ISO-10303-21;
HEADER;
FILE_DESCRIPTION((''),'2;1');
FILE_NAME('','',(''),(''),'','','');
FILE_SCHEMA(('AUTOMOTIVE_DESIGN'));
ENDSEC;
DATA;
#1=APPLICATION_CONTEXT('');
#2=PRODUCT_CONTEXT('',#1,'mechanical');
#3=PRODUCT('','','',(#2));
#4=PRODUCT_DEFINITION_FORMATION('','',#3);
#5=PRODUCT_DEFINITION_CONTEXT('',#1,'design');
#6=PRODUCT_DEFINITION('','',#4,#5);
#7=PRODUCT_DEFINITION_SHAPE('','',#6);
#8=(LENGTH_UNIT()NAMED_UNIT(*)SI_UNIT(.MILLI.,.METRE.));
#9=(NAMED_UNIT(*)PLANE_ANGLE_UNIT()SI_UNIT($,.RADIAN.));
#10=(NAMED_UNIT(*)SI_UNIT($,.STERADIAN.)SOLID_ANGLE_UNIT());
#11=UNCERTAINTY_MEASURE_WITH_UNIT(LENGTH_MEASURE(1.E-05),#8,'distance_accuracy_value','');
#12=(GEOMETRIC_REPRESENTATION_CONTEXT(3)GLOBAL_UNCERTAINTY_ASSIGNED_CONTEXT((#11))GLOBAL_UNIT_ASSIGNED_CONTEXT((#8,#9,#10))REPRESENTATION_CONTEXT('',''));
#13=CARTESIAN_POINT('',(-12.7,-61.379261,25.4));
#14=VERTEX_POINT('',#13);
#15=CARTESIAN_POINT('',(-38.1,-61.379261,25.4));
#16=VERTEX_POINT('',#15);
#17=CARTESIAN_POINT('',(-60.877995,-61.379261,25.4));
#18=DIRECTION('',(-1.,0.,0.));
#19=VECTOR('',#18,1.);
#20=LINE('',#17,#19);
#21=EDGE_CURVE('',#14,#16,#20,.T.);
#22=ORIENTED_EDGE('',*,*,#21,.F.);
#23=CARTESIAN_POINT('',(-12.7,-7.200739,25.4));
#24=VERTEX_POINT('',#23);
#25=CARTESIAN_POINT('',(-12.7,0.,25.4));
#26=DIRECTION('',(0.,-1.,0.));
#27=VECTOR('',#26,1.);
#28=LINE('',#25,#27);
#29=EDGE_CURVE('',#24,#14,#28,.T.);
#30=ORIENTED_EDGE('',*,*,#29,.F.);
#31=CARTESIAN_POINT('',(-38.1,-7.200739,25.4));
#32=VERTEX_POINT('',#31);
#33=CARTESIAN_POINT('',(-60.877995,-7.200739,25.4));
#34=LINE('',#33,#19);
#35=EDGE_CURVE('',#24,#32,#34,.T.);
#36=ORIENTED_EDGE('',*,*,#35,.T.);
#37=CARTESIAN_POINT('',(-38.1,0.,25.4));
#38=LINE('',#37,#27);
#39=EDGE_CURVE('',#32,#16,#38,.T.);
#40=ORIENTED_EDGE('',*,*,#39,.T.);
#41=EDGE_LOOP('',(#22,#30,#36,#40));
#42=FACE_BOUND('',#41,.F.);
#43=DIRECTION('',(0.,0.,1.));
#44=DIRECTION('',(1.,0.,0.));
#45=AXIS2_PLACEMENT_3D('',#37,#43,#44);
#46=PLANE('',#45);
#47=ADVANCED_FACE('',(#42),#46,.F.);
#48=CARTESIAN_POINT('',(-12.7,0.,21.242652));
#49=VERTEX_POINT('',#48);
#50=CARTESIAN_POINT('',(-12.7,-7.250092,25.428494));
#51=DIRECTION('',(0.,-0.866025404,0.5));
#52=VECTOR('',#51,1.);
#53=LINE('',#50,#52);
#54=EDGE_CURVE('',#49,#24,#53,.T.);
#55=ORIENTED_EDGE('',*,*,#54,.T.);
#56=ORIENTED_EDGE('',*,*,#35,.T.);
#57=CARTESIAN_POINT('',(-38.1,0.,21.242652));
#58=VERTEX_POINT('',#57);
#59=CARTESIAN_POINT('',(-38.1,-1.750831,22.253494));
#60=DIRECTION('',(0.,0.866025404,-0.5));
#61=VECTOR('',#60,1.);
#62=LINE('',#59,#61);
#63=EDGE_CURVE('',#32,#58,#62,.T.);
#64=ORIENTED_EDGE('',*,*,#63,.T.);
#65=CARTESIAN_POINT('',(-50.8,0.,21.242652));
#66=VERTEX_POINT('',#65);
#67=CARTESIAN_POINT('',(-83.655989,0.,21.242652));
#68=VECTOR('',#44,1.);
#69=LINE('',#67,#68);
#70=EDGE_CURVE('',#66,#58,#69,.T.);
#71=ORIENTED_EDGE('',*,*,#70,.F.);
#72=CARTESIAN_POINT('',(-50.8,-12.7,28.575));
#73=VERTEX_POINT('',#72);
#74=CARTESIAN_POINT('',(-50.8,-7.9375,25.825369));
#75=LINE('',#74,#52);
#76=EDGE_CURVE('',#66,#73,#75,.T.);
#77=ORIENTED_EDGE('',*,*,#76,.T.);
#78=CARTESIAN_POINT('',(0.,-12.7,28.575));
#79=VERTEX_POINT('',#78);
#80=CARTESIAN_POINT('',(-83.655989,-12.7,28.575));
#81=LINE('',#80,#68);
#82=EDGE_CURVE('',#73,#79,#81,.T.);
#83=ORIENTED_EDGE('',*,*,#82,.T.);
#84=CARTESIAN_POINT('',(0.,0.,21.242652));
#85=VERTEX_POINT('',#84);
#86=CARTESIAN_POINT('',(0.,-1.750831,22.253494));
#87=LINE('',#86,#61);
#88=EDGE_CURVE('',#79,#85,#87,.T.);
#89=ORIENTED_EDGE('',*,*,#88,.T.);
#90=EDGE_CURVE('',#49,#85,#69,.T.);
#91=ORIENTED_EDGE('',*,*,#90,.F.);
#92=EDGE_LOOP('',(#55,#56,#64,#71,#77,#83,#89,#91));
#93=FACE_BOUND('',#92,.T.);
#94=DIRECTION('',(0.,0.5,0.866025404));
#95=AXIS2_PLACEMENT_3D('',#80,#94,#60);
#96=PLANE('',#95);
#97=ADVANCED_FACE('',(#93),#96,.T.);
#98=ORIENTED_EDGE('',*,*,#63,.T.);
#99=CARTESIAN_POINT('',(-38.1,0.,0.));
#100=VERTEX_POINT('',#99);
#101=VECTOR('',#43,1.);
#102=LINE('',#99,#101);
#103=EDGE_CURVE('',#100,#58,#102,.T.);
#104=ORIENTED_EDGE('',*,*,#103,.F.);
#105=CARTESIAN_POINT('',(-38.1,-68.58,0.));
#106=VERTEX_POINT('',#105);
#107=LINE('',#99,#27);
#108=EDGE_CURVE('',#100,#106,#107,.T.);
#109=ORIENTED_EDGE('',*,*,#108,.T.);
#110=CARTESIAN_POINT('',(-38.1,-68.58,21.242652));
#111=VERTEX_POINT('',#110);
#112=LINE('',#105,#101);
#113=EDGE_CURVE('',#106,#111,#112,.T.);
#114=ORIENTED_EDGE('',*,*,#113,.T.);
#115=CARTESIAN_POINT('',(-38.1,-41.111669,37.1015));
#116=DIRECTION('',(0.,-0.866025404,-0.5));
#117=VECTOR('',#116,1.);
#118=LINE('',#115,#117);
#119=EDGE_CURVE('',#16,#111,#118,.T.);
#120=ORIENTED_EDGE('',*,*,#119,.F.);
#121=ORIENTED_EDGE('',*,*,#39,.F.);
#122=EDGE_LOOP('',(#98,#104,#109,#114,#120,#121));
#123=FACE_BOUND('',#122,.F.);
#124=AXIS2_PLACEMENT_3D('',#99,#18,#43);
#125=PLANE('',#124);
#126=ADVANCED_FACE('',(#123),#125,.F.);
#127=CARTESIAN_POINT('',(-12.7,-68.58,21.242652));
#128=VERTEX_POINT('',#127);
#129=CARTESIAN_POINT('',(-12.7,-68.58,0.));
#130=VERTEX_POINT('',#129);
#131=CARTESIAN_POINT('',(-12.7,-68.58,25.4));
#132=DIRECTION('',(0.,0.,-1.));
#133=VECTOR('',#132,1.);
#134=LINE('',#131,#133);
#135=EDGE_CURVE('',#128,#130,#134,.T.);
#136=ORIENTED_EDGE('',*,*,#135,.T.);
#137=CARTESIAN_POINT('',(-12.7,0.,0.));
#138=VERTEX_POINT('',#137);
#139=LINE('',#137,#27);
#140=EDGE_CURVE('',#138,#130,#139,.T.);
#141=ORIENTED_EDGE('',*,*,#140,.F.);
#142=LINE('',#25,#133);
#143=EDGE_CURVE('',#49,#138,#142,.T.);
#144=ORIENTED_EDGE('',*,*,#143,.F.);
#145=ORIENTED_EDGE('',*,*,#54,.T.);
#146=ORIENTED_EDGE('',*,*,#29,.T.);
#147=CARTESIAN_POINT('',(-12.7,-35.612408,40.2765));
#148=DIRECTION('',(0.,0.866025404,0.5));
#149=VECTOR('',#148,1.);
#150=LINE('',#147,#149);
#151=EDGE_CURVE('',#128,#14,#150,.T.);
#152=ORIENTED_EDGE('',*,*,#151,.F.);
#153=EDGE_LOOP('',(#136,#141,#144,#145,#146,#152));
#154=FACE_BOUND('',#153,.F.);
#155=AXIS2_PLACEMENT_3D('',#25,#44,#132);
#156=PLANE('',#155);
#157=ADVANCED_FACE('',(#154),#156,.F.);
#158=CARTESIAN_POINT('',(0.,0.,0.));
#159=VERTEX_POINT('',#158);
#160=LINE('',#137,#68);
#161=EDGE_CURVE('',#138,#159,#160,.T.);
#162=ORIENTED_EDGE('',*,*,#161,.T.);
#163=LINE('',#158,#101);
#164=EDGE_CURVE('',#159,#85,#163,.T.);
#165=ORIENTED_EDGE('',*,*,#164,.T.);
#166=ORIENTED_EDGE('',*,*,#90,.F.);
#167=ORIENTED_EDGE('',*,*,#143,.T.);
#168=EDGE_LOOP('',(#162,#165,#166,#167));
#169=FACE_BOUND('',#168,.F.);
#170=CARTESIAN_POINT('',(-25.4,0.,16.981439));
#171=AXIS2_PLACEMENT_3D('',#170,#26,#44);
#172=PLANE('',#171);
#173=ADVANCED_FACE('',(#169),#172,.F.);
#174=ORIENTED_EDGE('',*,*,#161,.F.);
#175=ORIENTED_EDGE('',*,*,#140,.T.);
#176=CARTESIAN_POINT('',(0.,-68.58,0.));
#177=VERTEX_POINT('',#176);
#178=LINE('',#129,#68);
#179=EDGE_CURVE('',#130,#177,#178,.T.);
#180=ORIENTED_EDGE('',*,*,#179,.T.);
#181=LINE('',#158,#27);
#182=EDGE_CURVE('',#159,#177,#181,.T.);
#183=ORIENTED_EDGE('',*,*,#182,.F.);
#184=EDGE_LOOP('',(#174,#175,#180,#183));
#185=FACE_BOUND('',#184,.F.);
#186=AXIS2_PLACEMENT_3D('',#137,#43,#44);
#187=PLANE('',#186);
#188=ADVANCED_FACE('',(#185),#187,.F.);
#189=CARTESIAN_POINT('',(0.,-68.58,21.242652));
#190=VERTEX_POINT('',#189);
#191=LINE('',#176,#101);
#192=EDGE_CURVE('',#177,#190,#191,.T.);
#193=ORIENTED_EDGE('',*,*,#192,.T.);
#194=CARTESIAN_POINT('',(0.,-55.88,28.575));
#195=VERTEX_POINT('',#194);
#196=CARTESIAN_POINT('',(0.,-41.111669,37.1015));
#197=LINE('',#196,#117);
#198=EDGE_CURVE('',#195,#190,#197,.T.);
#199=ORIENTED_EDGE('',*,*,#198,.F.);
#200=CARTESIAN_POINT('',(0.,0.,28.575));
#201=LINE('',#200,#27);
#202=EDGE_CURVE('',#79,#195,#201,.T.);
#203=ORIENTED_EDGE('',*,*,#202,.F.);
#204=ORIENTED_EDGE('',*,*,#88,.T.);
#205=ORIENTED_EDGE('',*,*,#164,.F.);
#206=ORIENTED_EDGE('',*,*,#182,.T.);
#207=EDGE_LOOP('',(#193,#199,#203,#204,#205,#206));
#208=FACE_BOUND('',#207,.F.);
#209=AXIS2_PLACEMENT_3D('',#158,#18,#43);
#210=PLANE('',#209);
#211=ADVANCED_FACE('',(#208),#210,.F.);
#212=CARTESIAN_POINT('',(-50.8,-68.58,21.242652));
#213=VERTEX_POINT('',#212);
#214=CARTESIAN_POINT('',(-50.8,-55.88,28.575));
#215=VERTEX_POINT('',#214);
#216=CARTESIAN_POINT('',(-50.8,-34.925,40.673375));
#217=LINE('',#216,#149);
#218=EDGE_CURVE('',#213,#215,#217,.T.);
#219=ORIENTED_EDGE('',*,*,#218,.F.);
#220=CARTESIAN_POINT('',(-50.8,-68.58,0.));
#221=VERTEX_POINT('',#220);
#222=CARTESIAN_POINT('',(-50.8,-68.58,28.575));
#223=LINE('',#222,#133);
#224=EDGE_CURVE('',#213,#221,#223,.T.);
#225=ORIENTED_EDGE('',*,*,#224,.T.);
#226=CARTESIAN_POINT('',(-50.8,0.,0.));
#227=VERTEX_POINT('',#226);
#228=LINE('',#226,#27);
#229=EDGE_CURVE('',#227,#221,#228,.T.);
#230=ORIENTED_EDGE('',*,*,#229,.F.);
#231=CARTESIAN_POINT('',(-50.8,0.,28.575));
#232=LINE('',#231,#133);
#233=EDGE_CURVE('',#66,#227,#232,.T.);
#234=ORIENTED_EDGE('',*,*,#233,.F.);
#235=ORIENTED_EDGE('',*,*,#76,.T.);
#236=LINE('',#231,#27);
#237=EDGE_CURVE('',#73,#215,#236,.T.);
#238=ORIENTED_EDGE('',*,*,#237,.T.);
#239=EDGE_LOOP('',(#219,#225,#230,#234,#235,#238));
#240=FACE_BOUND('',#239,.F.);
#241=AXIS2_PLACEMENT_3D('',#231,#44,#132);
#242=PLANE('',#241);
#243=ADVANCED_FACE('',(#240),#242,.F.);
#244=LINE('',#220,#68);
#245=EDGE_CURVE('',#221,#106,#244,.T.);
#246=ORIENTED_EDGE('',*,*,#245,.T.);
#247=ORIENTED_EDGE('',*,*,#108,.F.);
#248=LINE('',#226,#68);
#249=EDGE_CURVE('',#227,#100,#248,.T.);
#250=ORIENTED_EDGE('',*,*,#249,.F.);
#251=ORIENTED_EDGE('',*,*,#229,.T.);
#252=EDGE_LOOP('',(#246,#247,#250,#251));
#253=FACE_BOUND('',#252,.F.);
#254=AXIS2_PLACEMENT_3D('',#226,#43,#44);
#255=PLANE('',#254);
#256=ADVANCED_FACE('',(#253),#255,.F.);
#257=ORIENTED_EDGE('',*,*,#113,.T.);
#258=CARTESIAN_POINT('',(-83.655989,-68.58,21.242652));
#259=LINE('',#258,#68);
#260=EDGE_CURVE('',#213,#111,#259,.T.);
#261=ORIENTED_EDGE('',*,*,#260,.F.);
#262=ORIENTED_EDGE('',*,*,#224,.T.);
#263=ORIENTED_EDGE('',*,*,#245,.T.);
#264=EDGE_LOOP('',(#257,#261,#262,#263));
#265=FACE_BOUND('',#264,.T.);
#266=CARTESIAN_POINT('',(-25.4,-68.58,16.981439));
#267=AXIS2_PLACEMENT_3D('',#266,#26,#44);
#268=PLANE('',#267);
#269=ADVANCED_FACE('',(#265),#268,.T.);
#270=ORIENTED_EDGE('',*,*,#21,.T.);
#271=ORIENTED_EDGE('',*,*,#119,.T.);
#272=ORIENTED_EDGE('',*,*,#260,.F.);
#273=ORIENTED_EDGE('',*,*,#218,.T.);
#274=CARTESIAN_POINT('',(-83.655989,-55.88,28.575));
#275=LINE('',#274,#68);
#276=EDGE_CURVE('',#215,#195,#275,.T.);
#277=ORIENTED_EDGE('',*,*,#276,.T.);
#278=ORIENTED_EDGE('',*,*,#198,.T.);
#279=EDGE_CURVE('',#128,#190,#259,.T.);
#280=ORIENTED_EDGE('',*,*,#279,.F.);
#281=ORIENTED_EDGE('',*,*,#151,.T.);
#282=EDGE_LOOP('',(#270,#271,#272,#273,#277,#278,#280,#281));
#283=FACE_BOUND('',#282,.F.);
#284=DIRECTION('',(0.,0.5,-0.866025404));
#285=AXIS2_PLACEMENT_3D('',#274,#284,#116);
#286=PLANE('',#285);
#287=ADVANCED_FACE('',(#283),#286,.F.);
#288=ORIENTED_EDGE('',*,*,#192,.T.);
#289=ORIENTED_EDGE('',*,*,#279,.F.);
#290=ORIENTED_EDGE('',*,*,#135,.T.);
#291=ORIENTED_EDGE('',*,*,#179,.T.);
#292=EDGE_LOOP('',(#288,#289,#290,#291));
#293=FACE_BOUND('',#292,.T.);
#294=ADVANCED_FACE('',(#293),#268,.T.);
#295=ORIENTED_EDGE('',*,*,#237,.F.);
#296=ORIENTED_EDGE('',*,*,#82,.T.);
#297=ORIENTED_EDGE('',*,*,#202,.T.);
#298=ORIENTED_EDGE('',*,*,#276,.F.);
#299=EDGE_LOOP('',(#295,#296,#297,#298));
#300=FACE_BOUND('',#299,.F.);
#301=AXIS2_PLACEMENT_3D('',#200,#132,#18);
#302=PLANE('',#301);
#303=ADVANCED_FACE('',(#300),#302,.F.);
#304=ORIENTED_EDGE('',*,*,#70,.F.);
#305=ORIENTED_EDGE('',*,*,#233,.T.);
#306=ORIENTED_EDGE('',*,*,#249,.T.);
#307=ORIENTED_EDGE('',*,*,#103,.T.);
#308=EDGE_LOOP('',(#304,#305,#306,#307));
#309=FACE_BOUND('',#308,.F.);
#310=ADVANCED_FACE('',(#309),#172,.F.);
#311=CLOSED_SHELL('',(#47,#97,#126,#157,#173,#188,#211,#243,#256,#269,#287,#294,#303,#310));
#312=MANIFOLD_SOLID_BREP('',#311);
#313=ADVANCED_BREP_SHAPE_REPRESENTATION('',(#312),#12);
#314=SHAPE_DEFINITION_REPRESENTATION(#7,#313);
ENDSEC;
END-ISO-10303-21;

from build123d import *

# Parameters (mm, degrees)
F1_DEPTH    = 68.58
F2_T1_DEPTH = 116.511978168


# Not quite as in the source:
# - a fillet or chamfer that OpenCascade refuses, or shapes differently, is made with other operations: its cross-section is extruded or revolved along the edge and cut away or added


with BuildPart() as f1:
    # F0 (on Front) → F1 (new body)
    with BuildSketch(Plane.XZ):
        Polygon((-12.7, 0), (0, 0), (0, 28.575), (-50.8, 28.575), (-50.8, 0), (-38.1, 0), (-38.1, 25.4), (-12.7, 25.4), align=None)
    extrude(amount=F1_DEPTH)

    # F2: chamfer of 12.7 x 7.3323484187 on 2 edges, made by hand

    # F2_s2 → F2_t1 (cut)
    with BuildSketch(Plane.YZ.offset(-83.655989084)):
        Polygon((-12.7, 28.575), (0, 21.2426515813), (0, 28.575), align=None)
        Polygon((-55.88, 28.575), (-68.58, 21.2426515813), (-68.58, 28.575), align=None)
    extrude(amount=F2_T1_DEPTH, mode=Mode.SUBTRACT)


solid = f1.part
